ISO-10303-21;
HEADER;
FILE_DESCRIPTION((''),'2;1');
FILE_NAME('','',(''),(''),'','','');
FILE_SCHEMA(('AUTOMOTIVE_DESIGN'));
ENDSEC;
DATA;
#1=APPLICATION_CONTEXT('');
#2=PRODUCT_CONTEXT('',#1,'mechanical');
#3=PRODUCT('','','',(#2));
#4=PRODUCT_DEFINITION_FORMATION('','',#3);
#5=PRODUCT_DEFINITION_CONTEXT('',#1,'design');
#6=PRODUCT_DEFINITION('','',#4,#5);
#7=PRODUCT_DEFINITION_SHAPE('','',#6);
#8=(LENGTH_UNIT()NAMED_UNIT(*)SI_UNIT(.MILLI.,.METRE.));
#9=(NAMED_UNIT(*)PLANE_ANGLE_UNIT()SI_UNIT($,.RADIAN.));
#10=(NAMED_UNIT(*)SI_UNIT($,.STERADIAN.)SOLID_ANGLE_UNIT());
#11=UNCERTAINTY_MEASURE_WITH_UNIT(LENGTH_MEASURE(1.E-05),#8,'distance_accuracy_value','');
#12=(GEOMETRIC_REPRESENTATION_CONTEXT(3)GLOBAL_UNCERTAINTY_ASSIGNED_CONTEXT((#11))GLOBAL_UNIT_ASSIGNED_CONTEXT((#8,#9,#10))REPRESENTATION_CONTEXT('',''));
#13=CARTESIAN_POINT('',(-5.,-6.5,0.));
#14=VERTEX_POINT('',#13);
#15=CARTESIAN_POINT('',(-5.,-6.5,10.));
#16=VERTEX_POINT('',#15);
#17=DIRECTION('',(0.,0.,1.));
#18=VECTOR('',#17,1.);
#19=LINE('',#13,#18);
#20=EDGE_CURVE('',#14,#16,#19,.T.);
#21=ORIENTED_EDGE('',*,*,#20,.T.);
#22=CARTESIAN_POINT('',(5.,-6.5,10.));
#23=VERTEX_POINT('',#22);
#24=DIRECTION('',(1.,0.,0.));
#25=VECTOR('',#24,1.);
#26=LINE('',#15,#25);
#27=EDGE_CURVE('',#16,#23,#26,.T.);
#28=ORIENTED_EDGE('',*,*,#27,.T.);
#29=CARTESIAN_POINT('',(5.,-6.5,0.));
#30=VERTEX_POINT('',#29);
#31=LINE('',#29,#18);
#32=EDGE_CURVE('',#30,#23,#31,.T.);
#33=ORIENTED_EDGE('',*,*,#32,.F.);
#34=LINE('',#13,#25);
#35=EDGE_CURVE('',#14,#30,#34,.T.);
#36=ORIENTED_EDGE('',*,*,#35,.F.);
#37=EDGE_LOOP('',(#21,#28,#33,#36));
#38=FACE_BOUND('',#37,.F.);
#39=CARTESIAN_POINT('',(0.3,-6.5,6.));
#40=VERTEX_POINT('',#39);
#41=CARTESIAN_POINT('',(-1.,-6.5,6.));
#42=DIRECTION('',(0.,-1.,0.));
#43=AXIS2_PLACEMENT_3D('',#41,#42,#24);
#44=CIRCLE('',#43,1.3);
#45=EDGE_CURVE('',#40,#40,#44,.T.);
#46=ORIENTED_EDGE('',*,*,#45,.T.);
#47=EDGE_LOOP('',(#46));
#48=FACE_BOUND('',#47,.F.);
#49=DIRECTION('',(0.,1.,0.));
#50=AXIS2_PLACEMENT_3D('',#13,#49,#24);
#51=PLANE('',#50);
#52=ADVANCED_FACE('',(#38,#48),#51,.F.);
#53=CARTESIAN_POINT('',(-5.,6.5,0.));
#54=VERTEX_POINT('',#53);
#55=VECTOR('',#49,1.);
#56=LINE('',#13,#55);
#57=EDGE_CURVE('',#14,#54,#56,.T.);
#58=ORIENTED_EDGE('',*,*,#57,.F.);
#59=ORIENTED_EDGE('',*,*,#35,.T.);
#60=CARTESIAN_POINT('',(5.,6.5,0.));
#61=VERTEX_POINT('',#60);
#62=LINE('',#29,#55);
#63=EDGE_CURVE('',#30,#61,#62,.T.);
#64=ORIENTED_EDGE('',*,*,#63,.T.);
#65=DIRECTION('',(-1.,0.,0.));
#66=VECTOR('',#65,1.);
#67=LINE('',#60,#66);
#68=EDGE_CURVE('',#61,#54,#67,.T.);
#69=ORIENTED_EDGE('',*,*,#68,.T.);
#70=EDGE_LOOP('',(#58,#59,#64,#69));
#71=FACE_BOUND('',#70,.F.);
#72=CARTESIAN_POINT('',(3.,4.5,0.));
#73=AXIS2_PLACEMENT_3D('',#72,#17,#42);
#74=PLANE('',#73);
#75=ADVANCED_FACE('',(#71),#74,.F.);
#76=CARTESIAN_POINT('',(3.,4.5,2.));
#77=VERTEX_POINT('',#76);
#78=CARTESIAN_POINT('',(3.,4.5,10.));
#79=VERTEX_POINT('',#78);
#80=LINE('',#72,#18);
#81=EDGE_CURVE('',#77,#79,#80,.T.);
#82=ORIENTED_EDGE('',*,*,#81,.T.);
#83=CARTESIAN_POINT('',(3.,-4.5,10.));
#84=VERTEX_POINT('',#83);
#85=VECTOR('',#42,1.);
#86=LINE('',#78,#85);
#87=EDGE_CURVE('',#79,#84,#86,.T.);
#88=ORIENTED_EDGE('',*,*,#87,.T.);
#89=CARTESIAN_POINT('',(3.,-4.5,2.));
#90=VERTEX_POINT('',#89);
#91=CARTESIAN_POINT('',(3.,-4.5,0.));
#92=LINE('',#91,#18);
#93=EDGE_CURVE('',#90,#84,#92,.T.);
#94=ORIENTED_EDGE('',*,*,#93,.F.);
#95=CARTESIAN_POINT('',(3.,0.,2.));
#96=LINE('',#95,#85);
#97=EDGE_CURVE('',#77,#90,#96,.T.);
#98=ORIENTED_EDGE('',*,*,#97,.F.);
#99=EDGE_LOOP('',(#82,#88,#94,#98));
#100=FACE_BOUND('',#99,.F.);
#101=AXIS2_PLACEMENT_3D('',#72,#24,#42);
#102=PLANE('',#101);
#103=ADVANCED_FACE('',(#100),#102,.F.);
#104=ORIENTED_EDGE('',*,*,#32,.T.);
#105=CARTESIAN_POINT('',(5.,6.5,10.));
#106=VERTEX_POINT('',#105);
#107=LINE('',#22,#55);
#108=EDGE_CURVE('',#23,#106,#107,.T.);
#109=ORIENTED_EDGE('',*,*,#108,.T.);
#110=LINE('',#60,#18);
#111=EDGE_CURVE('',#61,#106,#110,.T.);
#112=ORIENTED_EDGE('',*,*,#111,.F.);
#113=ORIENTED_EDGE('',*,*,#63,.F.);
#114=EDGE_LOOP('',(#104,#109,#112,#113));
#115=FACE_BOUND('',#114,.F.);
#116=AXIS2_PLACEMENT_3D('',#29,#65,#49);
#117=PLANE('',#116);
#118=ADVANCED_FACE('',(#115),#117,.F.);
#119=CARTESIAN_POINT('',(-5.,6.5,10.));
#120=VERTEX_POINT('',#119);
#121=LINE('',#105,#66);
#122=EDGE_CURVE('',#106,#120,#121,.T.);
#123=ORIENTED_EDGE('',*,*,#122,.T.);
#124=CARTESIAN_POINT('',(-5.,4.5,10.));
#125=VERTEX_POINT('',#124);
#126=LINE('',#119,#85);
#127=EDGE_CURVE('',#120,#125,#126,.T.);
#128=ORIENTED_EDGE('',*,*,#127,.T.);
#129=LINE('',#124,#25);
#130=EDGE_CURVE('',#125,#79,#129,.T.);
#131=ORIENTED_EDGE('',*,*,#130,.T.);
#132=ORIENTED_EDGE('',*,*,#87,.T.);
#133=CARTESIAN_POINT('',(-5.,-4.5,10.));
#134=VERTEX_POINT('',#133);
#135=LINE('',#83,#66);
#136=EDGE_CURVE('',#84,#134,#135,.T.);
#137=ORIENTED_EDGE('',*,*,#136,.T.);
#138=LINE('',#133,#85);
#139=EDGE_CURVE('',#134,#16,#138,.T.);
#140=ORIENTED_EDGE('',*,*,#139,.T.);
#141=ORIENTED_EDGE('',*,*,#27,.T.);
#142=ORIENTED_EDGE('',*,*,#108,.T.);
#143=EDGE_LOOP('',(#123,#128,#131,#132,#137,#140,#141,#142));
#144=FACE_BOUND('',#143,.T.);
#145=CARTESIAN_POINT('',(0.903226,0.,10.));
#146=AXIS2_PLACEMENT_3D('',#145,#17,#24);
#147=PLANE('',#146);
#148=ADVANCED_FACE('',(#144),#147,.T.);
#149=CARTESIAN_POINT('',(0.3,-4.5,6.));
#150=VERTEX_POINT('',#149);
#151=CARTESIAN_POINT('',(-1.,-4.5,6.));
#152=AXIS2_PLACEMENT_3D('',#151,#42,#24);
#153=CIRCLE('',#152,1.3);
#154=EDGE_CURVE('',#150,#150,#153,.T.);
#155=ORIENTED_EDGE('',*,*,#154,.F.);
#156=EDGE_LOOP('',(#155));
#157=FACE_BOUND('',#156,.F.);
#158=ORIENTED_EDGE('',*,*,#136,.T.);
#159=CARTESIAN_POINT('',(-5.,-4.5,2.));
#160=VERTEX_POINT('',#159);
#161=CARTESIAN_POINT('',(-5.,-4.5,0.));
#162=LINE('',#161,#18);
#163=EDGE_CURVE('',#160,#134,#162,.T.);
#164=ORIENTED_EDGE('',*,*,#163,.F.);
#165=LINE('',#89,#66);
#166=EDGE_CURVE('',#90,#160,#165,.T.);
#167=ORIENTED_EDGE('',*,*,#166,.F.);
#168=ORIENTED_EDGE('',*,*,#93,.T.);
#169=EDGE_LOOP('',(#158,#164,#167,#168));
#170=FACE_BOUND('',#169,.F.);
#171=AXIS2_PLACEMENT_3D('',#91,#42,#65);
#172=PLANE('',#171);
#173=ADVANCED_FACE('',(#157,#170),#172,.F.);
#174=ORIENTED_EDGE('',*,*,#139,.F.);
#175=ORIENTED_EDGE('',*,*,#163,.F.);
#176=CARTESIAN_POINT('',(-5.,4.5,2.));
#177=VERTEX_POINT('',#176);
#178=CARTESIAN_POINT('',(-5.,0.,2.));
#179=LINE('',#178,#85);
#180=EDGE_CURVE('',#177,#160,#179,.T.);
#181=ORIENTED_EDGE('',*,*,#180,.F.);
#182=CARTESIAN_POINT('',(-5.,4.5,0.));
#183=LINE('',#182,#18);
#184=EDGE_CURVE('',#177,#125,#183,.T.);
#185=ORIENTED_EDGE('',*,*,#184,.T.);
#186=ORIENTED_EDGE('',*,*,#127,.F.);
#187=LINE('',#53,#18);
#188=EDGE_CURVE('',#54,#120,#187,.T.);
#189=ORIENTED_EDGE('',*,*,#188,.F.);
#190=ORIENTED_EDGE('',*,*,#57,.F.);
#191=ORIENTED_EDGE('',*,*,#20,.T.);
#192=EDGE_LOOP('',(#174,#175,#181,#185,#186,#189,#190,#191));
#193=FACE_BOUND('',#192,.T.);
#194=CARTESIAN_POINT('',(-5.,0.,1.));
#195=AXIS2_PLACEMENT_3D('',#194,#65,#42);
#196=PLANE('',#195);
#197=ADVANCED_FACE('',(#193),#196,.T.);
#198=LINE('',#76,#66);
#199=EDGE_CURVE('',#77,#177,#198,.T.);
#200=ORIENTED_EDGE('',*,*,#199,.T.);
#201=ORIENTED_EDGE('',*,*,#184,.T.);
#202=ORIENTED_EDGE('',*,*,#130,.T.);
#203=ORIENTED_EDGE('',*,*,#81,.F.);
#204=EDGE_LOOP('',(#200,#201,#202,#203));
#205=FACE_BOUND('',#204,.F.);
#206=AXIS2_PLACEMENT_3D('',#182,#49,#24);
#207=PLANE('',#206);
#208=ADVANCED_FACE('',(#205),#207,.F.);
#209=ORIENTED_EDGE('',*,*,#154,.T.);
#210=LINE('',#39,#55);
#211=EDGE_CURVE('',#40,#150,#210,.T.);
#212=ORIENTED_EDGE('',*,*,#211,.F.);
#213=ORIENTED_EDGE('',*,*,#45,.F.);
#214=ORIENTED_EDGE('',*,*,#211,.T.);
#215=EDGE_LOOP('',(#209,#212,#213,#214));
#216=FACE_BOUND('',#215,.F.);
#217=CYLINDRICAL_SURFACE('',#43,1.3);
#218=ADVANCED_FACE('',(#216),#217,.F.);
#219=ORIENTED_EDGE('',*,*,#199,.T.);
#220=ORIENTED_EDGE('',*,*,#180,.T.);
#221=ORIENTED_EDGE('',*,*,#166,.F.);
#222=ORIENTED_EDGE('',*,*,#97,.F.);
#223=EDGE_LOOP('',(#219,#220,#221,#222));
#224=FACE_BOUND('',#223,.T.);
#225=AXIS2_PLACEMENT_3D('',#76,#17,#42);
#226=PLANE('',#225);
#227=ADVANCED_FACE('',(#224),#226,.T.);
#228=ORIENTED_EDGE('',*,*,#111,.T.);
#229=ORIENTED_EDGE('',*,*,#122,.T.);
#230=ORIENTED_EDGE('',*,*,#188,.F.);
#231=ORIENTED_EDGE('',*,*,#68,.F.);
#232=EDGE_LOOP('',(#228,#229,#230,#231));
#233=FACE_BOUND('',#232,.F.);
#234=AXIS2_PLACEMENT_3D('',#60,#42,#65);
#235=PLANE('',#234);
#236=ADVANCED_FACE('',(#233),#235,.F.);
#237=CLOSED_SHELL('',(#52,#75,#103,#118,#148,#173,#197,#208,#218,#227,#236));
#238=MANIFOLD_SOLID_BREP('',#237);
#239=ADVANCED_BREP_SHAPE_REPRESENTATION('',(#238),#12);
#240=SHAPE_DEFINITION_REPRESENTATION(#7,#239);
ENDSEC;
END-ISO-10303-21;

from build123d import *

# Parameters (mm, degrees)
F1_DEPTH = 10
F2_W     = 9
F2_H     = 2
F3_DEPTH = 8
F4_R     = 1.3
F5_DEPTH = 2


# Not quite as in the source:
# - a feature names something its author has since deleted; it is built from what else it names


with BuildPart() as f1:
    # F0 (on Top) → F1 (new body)
    with BuildSketch(Plane.XY):
        Polygon((-5, -6.5), (5, -6.5), (5, 6.5), (-5, 6.5), (-5, 4.5), (-3, 4.5), (3, 4.5), (3, -4.5), (-3, -4.5), (-5, -4.5), align=None)
    extrude(amount=F1_DEPTH)

    # F2 (on face) → F3 (join)
    with BuildSketch(Plane(origin=(3, 0, 0), x_dir=(0, -1, 0), z_dir=(-1, 0, 0))):
        with Locations((0, 1)):
            Rectangle(F2_W, F2_H)
    extrude(amount=F3_DEPTH)

    # F4 (on face) → F5 (cut, through all)
    with BuildSketch(Plane.XZ.offset(6.5)):
        with Locations((-1, 6)):
            Circle(F4_R)
    extrude(amount=-F5_DEPTH, mode=Mode.SUBTRACT)


solid = f1.part
